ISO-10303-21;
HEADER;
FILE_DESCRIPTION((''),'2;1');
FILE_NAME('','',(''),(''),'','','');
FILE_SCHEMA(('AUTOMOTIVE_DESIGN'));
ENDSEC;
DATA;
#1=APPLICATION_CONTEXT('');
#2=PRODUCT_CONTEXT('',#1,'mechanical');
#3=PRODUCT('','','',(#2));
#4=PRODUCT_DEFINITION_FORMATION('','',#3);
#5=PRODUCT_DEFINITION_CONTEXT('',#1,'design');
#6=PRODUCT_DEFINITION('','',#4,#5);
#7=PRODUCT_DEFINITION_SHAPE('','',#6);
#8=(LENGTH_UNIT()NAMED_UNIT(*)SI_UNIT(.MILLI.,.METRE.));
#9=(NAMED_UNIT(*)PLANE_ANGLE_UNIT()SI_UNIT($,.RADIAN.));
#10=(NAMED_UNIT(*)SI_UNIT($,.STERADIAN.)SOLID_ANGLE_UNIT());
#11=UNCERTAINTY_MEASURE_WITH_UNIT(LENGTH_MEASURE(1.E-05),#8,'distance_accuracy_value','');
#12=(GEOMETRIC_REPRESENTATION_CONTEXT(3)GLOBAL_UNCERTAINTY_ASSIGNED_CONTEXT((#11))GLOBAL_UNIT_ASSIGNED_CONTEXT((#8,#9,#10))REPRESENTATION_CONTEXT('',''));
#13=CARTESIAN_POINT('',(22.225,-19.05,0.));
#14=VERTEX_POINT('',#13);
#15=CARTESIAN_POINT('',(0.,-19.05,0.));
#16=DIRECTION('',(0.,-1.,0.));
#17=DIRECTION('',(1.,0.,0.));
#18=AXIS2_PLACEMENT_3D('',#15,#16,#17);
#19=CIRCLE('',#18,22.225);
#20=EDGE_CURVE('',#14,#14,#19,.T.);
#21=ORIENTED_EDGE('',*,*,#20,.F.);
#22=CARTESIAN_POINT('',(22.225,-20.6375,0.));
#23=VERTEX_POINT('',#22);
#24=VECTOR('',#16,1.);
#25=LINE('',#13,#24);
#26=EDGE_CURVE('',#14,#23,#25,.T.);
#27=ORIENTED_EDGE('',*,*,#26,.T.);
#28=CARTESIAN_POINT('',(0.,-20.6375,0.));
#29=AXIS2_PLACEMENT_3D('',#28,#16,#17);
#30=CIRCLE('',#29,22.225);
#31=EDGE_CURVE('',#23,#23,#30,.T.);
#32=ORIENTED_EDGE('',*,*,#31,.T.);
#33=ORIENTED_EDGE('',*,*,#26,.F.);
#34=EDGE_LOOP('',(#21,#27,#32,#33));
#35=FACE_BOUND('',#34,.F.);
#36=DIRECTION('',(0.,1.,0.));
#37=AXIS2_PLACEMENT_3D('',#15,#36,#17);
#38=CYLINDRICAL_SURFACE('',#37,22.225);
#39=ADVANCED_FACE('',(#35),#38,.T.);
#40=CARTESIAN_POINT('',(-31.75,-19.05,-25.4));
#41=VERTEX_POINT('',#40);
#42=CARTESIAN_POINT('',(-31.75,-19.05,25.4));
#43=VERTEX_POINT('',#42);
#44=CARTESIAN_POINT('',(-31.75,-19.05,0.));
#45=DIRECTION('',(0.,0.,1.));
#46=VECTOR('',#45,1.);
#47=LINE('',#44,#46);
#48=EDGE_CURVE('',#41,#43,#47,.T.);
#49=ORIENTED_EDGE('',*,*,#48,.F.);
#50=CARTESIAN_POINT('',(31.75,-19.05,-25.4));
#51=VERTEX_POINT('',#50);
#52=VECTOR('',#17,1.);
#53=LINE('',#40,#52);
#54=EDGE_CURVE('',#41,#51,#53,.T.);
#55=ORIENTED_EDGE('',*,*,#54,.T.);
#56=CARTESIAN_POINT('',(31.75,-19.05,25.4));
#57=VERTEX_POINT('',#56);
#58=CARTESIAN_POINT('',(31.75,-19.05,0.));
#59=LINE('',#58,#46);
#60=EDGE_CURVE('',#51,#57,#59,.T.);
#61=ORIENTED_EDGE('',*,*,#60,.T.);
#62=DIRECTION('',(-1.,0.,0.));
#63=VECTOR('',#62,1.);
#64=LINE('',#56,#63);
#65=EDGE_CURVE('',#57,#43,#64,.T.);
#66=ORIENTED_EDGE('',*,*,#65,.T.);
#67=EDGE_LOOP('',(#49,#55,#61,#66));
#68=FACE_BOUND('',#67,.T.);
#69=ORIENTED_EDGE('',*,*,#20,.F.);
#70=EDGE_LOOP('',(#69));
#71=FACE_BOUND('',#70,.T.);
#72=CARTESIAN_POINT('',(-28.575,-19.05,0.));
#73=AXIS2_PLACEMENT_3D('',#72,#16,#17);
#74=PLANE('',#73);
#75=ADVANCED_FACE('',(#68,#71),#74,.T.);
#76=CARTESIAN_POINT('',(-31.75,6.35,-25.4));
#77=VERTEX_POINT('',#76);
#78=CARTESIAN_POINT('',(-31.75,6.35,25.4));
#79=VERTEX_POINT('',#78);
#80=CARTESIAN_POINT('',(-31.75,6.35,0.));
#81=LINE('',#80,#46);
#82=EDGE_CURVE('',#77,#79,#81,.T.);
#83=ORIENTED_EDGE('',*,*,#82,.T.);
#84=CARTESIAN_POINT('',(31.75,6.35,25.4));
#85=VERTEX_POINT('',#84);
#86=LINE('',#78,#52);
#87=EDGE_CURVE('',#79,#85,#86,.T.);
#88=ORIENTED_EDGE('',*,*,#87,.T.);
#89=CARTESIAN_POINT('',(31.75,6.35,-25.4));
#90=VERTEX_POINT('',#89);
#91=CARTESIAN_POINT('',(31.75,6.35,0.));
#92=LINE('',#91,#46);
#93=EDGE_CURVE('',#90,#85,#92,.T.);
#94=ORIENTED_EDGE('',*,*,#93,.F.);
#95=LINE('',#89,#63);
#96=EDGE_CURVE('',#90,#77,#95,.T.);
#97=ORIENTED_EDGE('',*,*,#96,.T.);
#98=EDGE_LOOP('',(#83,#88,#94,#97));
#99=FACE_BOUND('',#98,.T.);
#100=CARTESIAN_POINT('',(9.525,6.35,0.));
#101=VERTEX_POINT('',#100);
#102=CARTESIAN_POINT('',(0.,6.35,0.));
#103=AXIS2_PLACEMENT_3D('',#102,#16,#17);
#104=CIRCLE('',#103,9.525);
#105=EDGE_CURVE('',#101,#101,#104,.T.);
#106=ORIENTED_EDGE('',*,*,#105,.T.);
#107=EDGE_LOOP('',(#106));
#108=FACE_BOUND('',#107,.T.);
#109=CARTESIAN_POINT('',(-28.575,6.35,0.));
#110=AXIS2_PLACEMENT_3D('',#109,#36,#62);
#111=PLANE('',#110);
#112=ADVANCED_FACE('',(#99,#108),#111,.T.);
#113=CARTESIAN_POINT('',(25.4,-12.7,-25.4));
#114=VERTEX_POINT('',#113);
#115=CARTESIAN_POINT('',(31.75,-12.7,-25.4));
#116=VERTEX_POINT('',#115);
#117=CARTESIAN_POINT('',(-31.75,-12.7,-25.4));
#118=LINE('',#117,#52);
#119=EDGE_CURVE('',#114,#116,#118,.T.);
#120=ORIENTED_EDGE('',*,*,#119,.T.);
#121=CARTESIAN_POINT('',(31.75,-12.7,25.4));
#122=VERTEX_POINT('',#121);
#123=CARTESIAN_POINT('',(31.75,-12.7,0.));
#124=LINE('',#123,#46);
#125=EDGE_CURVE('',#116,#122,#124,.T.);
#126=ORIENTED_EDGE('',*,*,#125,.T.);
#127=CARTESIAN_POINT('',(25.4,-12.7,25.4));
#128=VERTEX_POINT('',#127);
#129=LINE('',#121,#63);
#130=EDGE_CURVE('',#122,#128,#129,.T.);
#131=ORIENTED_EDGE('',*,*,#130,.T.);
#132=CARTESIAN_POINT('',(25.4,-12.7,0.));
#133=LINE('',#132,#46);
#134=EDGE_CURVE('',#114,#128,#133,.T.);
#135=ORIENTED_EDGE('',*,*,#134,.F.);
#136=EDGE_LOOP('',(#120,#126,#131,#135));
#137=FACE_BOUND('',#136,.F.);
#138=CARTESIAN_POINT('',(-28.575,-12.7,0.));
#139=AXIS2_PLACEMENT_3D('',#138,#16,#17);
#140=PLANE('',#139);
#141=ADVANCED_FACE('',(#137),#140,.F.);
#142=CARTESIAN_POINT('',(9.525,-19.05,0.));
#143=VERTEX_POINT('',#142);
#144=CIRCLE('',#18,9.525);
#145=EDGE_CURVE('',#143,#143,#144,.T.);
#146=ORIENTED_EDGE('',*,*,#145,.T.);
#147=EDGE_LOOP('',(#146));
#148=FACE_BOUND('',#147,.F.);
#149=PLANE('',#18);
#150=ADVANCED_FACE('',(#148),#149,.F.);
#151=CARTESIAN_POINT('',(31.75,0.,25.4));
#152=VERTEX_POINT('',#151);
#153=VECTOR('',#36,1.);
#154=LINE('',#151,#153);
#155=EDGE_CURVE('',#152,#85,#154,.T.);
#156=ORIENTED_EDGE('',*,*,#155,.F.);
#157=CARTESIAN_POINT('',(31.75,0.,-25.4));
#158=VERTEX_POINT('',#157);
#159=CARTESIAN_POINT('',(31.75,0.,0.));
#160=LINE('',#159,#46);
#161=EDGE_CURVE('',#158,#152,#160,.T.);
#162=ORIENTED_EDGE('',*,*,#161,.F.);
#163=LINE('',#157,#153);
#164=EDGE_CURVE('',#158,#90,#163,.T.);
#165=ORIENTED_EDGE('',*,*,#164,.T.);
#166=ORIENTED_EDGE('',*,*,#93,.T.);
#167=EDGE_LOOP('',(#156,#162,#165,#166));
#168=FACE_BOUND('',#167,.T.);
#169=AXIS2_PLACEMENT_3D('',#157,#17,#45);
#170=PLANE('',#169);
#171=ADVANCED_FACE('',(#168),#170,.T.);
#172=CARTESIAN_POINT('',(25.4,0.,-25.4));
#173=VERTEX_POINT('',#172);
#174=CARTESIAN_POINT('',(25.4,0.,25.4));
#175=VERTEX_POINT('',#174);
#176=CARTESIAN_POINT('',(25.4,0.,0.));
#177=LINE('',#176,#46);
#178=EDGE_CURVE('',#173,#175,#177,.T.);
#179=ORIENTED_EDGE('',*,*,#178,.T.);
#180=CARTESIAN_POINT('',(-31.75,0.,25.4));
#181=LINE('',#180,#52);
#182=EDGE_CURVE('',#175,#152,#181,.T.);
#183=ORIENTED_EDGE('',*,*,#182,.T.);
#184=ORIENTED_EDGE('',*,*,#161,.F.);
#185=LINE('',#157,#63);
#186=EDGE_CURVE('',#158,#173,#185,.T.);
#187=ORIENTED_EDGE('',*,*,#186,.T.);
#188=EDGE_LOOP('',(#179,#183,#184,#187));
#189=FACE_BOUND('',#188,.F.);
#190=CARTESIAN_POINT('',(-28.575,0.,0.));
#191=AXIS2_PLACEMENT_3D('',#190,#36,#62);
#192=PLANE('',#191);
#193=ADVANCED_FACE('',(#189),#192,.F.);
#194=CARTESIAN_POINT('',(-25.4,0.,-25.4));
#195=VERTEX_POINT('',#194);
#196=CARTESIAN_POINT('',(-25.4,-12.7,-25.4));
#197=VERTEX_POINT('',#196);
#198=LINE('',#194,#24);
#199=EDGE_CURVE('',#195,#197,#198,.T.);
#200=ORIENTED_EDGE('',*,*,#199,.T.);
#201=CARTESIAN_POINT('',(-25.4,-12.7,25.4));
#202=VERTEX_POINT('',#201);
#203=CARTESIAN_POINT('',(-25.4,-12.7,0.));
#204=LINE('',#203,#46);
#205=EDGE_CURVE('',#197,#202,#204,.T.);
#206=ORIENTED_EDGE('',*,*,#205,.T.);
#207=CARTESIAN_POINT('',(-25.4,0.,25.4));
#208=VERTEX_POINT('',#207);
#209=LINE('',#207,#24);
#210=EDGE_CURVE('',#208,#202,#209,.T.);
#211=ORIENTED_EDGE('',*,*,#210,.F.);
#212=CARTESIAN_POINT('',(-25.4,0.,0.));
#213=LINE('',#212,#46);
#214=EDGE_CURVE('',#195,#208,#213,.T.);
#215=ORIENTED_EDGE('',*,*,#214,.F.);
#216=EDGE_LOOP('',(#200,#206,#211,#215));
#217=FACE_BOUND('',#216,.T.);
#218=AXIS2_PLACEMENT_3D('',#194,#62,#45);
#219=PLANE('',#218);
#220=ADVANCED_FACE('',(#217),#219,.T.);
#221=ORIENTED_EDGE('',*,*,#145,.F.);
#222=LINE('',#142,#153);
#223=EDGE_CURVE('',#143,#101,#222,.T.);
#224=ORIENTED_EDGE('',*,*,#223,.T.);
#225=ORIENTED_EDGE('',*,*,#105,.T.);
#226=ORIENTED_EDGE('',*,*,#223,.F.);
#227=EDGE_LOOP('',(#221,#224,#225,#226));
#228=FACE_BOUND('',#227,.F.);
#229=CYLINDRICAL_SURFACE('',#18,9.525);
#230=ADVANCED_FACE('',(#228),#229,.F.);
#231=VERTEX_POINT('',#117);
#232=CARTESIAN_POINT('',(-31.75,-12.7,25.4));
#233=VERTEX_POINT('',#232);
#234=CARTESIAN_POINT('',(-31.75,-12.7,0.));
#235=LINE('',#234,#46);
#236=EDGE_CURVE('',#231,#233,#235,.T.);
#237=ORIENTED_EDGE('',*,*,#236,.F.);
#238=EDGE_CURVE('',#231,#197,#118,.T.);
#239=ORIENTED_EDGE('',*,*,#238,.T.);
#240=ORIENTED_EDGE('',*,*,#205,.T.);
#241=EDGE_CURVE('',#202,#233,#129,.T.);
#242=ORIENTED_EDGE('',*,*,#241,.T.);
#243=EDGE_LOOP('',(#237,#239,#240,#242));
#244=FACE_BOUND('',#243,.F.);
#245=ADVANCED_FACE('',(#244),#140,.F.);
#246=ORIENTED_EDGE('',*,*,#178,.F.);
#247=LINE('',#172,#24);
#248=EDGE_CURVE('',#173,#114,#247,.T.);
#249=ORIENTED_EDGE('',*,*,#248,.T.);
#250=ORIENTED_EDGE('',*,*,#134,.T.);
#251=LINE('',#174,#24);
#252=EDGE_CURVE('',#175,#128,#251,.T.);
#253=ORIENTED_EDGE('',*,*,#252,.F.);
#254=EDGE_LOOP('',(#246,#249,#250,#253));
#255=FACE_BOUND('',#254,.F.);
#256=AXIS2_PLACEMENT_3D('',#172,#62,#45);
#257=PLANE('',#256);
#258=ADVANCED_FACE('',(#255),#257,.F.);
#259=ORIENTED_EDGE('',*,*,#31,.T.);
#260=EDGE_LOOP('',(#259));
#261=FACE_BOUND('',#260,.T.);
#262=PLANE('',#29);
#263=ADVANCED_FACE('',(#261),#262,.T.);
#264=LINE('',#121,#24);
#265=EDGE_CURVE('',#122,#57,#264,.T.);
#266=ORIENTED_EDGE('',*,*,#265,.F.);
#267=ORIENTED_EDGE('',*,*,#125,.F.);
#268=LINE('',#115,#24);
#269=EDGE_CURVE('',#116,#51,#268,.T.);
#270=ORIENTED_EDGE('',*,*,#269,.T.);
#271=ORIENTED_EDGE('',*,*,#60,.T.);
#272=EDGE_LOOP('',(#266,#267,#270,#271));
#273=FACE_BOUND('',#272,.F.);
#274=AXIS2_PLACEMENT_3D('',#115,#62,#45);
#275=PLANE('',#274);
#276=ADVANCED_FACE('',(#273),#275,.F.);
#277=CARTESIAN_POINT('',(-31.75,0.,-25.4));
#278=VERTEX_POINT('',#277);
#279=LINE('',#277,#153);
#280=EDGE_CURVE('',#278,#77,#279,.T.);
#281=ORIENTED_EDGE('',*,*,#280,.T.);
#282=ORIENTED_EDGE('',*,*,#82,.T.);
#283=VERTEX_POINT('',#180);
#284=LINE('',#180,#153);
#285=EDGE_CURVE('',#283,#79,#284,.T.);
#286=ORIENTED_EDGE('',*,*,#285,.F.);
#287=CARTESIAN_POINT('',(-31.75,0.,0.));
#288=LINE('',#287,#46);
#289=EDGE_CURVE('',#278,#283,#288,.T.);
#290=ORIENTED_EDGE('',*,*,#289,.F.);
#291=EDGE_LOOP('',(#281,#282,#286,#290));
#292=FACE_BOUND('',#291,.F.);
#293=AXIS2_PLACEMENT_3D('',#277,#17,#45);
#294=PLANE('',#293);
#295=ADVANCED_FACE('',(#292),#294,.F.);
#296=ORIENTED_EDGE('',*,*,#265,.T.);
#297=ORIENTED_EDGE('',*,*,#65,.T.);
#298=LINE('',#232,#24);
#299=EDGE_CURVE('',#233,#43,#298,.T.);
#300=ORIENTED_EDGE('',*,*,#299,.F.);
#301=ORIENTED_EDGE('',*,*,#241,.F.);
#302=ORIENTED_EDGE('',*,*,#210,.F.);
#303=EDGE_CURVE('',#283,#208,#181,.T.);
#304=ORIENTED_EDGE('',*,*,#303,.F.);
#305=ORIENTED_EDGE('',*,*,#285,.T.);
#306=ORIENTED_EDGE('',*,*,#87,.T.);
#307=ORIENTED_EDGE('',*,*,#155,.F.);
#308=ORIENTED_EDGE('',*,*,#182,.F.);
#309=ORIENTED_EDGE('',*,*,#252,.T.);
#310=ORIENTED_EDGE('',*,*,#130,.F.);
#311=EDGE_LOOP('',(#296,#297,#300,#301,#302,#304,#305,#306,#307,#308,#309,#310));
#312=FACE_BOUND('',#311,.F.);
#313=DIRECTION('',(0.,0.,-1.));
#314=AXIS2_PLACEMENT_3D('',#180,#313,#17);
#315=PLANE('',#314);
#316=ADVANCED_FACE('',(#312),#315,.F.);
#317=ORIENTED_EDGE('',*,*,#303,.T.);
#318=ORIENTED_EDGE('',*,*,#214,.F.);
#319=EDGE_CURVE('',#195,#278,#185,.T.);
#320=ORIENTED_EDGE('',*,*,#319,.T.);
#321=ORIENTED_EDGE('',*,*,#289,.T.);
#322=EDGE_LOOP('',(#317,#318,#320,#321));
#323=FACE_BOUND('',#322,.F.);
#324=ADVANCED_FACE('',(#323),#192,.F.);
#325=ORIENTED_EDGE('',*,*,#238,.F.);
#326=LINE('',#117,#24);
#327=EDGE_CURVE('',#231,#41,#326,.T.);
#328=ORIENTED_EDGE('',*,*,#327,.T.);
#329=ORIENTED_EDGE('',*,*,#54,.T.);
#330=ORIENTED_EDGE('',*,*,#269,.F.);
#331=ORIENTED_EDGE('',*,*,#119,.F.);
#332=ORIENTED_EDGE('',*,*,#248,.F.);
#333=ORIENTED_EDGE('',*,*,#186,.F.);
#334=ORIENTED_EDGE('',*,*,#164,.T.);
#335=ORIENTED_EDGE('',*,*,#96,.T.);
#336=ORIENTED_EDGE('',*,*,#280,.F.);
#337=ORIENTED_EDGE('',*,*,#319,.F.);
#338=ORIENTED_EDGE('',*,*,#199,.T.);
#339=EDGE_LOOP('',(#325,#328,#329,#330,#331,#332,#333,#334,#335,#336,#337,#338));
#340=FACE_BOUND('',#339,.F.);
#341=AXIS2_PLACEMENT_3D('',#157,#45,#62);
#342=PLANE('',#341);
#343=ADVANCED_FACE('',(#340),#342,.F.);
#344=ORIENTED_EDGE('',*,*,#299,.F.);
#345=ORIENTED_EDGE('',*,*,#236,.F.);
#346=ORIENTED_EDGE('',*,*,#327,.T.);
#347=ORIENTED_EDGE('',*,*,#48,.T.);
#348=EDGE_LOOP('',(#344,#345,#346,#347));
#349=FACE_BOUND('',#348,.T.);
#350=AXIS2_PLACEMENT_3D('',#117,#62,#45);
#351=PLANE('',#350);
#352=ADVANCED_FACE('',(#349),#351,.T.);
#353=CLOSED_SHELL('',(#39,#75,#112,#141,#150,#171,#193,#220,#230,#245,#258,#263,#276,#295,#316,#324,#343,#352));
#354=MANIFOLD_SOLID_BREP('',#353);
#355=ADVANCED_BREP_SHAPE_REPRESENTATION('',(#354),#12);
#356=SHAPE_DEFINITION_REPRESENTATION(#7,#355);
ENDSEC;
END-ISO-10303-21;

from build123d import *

# Parameters (mm, degrees)
F0_W     = 50.8
F0_H     = 50.8
F1_DEPTH = 12.7
F2_W     = 6.35
F2_H     = 50.8
F2_W_2   = 50.8
F3_DEPTH = 6.35
F4_W     = 6.35
F4_H     = 50.8
F4_W_2   = 50.8
F5_DEPTH = 6.35
F6_R     = 9.525
F7_DEPTH = 38.1
F8_R     = 22.225
F8_R_2   = 9.525
F9_DEPTH = 1.5875


# Not quite as in the source:
# - a feature names something its author has since deleted; it is built from what else it names


with BuildPart() as f1:
    # F0 (on Front) → F1 (new body)
    with BuildSketch(Plane.XZ):
        Rectangle(F0_W, F0_H)
    extrude(amount=F1_DEPTH)

    # F2 (on face) → F3 (join)
    with BuildSketch(Plane.XZ.offset(12.7)):
        with Locations((-28.575, 0)):
            Rectangle(F2_W, F2_H)
        Rectangle(F2_W_2, F2_H)
        with Locations((28.575, 0)):
            Rectangle(F2_W, F2_H)
    extrude(amount=F3_DEPTH)

    # F4 (on face) → F5 (join)
    with BuildSketch(Plane(origin=(0, 0, 0), x_dir=(-1, 0, 0), z_dir=(0, 1, 0))):
        with Locations((28.575, 0)):
            Rectangle(F4_W, F4_H)
        Rectangle(F4_W_2, F4_H)
        with Locations((-28.575, 0)):
            Rectangle(F4_W, F4_H)
    extrude(amount=F5_DEPTH)

    # F6 (on face) → F7 (cut)
    with BuildSketch(Plane.XZ.offset(19.05)):
        Circle(F6_R)
    extrude(amount=-F7_DEPTH, mode=Mode.SUBTRACT)

    # F8 (on face) → F9 (join)
    with BuildSketch(Plane.XZ.offset(19.05)):
        Circle(F8_R)
        Circle(F8_R_2, mode=Mode.SUBTRACT)
        Circle(F8_R_2)
    extrude(amount=F9_DEPTH)


solid = f1.part
